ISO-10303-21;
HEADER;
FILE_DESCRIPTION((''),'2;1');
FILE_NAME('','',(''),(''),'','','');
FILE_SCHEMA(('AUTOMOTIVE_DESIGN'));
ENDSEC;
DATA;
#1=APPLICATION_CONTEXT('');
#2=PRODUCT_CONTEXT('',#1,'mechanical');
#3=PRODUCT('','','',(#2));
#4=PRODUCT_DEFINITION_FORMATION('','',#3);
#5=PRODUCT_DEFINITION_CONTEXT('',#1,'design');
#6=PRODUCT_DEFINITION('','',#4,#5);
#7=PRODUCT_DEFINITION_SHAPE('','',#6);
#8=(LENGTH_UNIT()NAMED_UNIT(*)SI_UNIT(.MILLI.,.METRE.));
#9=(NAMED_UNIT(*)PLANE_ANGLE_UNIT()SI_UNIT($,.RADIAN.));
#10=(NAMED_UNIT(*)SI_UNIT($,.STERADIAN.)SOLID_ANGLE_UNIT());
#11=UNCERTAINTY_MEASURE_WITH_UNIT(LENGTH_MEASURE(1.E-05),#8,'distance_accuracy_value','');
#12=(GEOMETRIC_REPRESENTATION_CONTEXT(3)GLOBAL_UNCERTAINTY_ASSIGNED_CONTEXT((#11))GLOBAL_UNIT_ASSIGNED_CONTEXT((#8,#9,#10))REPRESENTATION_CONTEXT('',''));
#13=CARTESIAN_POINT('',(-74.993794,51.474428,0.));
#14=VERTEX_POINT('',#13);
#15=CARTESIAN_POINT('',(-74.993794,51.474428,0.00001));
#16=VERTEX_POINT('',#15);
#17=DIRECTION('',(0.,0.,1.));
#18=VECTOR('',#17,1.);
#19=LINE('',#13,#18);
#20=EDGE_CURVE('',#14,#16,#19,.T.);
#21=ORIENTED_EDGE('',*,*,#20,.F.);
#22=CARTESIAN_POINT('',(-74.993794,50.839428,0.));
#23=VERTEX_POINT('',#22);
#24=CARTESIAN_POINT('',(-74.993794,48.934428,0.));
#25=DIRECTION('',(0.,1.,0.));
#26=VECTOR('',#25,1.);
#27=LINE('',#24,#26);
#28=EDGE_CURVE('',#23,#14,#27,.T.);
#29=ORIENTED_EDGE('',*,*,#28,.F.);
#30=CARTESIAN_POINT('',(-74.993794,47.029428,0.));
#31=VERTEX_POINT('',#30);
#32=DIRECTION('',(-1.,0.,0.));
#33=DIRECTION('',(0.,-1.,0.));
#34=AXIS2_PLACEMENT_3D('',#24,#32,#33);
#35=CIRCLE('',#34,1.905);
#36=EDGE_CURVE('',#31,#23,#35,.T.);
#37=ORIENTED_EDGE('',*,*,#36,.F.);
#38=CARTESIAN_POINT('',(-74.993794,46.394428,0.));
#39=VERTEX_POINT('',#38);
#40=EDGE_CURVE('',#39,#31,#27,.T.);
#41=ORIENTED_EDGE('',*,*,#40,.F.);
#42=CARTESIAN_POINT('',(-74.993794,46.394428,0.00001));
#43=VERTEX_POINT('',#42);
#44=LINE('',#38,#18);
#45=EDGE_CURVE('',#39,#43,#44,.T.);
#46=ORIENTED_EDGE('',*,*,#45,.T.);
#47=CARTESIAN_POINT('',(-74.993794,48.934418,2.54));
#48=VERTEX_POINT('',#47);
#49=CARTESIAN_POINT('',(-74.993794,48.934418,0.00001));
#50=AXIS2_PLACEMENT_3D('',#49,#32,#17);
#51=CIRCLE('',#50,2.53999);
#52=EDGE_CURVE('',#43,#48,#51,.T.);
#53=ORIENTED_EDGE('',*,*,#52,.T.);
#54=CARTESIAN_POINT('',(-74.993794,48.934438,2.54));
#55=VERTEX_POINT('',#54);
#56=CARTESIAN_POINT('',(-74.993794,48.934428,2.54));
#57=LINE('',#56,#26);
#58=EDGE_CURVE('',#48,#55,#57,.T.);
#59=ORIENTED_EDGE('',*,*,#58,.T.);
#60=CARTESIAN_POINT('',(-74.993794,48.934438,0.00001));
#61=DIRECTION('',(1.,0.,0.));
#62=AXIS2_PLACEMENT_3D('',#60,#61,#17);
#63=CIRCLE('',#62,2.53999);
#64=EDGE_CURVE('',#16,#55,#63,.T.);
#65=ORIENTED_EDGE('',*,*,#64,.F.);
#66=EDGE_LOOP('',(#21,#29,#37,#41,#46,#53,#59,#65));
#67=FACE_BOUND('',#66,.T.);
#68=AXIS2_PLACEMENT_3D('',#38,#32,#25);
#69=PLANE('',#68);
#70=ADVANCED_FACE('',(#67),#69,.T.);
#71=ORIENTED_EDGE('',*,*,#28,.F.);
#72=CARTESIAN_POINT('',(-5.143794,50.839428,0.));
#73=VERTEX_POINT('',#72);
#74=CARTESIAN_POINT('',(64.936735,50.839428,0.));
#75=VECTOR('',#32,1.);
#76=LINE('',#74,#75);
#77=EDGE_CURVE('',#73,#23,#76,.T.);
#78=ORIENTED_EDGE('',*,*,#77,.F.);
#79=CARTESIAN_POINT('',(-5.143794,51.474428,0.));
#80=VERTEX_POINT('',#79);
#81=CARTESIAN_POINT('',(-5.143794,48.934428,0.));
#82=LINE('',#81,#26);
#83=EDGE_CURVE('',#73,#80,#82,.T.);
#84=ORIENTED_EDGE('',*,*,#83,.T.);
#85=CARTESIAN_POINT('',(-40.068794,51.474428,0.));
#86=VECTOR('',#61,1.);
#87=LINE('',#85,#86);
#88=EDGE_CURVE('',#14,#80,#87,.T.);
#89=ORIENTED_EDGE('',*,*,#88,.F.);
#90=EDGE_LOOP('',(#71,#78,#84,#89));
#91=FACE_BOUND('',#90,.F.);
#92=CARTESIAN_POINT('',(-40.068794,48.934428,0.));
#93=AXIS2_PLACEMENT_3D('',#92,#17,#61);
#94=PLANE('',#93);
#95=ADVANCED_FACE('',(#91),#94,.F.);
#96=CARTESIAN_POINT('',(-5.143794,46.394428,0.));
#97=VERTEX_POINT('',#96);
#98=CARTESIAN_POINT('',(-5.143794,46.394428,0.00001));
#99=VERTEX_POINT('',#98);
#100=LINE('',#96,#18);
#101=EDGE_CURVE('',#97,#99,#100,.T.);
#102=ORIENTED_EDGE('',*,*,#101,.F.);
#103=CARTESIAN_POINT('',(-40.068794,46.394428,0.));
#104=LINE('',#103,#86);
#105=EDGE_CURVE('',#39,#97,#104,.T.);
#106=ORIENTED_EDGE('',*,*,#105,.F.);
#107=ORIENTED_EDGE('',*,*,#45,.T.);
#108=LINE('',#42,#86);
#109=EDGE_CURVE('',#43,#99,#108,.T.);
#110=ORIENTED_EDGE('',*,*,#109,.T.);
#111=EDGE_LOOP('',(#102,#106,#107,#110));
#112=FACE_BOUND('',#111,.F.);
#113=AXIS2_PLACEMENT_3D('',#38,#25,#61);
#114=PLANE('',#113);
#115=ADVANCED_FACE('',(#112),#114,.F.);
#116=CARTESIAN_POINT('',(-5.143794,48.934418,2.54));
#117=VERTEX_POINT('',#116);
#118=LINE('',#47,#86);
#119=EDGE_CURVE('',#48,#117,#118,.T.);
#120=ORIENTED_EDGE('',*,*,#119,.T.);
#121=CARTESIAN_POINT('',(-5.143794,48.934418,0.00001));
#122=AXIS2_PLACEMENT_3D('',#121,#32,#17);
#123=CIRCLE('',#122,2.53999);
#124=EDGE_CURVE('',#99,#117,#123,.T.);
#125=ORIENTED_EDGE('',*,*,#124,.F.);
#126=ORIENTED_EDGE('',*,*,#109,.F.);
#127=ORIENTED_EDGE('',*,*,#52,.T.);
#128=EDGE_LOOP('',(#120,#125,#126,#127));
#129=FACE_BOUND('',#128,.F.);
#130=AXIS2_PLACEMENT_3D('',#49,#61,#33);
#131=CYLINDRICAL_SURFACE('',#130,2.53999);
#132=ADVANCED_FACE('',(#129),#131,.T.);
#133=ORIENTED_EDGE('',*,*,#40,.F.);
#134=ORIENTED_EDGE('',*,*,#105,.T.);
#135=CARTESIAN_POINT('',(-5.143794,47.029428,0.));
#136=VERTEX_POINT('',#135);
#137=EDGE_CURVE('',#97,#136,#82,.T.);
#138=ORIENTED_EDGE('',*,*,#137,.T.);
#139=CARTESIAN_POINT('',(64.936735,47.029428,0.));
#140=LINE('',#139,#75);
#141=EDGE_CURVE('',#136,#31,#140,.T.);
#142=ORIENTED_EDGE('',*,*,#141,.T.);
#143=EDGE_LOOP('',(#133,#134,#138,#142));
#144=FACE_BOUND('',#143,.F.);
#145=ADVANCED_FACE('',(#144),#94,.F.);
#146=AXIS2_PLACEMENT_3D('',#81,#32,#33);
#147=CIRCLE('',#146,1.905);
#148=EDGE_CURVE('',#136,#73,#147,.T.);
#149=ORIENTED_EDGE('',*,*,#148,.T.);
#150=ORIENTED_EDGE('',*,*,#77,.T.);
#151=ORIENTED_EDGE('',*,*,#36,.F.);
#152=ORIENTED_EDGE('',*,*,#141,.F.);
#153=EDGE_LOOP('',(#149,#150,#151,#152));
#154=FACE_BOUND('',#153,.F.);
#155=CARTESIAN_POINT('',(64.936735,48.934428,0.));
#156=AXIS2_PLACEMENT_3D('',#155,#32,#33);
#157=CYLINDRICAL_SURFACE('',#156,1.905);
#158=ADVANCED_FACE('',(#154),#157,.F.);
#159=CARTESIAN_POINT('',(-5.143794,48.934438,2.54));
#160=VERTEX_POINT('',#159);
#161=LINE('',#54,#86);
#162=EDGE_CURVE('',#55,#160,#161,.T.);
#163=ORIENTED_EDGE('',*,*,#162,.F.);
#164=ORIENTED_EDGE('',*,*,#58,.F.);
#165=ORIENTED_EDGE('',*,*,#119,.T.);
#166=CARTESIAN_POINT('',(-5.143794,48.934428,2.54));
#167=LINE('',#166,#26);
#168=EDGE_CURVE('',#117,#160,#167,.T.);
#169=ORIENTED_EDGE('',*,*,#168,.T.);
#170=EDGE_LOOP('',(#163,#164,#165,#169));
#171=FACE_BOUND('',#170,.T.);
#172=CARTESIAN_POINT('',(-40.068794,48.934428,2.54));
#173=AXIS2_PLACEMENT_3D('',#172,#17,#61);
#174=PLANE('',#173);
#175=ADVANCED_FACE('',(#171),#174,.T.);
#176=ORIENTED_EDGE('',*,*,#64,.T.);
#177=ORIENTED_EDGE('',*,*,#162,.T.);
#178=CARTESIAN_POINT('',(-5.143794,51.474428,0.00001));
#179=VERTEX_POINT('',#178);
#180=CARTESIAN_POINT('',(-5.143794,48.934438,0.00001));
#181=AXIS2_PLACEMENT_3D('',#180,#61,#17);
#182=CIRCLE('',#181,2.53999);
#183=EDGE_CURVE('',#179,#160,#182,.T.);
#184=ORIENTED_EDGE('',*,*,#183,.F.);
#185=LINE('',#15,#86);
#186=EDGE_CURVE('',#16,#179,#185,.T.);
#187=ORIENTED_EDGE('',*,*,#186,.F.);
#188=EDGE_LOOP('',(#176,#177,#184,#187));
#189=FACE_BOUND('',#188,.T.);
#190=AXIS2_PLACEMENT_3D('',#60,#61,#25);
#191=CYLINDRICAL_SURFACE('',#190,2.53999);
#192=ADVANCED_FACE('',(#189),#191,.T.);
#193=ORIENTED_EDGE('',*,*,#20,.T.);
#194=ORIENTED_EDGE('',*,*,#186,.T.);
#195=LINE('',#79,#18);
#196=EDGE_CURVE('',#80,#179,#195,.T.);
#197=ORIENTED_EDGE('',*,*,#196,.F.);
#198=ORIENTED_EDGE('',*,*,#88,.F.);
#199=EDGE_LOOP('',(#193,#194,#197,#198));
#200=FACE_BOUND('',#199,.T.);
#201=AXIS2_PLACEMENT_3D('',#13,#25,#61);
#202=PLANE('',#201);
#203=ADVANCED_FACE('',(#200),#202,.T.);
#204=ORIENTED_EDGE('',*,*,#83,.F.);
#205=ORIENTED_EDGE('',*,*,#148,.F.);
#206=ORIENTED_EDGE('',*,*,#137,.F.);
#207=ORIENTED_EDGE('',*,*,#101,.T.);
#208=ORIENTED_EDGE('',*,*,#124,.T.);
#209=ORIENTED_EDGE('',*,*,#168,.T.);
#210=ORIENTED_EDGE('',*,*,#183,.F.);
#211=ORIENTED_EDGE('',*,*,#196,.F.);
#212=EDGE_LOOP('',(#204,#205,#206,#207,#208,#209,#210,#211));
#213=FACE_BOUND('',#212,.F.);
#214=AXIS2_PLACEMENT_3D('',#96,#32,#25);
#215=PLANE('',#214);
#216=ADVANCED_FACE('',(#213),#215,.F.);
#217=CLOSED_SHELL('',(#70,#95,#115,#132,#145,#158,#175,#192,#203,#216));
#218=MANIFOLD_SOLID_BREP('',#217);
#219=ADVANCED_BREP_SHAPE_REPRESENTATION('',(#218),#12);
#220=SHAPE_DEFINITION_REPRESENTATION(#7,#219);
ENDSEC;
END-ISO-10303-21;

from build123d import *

# Parameters (mm, degrees)
F0_W     = 69.85
F0_H     = 5.08
F1_DEPTH = 2.54
F2_R     = 2.53999
F4_D     = 3.81


# Not quite as in the source:
# - a fillet or chamfer is up to 0.001 mm smaller than in the source, because OpenCascade refuses the exact size


with BuildPart() as f1:
    # F0 (on Top) → F1 (new body)
    with BuildSketch(Plane.XY):
        with Locations((-40.0687940419, 48.9344280766)):
            Rectangle(F0_W, F0_H)
    extrude(amount=F1_DEPTH)

    # F2 (radius 2.54 in the source; OpenCascade refuses exactly that, so slightly less here)
    f2_edges = [f1.edges().sort_by_distance(p)[0] for p in [
        (-40.068794, 46.394428, 2.54),
        (-40.068794, 51.474428, 2.54),
    ]]
    fillet(f2_edges, radius=F2_R)

    # F4 (through all)
    with Locations(Plane.YZ.offset(-5.1437940419)):
        with Locations((48.9344280766, 0)):
            Hole(F4_D / 2)


solid = f1.part
